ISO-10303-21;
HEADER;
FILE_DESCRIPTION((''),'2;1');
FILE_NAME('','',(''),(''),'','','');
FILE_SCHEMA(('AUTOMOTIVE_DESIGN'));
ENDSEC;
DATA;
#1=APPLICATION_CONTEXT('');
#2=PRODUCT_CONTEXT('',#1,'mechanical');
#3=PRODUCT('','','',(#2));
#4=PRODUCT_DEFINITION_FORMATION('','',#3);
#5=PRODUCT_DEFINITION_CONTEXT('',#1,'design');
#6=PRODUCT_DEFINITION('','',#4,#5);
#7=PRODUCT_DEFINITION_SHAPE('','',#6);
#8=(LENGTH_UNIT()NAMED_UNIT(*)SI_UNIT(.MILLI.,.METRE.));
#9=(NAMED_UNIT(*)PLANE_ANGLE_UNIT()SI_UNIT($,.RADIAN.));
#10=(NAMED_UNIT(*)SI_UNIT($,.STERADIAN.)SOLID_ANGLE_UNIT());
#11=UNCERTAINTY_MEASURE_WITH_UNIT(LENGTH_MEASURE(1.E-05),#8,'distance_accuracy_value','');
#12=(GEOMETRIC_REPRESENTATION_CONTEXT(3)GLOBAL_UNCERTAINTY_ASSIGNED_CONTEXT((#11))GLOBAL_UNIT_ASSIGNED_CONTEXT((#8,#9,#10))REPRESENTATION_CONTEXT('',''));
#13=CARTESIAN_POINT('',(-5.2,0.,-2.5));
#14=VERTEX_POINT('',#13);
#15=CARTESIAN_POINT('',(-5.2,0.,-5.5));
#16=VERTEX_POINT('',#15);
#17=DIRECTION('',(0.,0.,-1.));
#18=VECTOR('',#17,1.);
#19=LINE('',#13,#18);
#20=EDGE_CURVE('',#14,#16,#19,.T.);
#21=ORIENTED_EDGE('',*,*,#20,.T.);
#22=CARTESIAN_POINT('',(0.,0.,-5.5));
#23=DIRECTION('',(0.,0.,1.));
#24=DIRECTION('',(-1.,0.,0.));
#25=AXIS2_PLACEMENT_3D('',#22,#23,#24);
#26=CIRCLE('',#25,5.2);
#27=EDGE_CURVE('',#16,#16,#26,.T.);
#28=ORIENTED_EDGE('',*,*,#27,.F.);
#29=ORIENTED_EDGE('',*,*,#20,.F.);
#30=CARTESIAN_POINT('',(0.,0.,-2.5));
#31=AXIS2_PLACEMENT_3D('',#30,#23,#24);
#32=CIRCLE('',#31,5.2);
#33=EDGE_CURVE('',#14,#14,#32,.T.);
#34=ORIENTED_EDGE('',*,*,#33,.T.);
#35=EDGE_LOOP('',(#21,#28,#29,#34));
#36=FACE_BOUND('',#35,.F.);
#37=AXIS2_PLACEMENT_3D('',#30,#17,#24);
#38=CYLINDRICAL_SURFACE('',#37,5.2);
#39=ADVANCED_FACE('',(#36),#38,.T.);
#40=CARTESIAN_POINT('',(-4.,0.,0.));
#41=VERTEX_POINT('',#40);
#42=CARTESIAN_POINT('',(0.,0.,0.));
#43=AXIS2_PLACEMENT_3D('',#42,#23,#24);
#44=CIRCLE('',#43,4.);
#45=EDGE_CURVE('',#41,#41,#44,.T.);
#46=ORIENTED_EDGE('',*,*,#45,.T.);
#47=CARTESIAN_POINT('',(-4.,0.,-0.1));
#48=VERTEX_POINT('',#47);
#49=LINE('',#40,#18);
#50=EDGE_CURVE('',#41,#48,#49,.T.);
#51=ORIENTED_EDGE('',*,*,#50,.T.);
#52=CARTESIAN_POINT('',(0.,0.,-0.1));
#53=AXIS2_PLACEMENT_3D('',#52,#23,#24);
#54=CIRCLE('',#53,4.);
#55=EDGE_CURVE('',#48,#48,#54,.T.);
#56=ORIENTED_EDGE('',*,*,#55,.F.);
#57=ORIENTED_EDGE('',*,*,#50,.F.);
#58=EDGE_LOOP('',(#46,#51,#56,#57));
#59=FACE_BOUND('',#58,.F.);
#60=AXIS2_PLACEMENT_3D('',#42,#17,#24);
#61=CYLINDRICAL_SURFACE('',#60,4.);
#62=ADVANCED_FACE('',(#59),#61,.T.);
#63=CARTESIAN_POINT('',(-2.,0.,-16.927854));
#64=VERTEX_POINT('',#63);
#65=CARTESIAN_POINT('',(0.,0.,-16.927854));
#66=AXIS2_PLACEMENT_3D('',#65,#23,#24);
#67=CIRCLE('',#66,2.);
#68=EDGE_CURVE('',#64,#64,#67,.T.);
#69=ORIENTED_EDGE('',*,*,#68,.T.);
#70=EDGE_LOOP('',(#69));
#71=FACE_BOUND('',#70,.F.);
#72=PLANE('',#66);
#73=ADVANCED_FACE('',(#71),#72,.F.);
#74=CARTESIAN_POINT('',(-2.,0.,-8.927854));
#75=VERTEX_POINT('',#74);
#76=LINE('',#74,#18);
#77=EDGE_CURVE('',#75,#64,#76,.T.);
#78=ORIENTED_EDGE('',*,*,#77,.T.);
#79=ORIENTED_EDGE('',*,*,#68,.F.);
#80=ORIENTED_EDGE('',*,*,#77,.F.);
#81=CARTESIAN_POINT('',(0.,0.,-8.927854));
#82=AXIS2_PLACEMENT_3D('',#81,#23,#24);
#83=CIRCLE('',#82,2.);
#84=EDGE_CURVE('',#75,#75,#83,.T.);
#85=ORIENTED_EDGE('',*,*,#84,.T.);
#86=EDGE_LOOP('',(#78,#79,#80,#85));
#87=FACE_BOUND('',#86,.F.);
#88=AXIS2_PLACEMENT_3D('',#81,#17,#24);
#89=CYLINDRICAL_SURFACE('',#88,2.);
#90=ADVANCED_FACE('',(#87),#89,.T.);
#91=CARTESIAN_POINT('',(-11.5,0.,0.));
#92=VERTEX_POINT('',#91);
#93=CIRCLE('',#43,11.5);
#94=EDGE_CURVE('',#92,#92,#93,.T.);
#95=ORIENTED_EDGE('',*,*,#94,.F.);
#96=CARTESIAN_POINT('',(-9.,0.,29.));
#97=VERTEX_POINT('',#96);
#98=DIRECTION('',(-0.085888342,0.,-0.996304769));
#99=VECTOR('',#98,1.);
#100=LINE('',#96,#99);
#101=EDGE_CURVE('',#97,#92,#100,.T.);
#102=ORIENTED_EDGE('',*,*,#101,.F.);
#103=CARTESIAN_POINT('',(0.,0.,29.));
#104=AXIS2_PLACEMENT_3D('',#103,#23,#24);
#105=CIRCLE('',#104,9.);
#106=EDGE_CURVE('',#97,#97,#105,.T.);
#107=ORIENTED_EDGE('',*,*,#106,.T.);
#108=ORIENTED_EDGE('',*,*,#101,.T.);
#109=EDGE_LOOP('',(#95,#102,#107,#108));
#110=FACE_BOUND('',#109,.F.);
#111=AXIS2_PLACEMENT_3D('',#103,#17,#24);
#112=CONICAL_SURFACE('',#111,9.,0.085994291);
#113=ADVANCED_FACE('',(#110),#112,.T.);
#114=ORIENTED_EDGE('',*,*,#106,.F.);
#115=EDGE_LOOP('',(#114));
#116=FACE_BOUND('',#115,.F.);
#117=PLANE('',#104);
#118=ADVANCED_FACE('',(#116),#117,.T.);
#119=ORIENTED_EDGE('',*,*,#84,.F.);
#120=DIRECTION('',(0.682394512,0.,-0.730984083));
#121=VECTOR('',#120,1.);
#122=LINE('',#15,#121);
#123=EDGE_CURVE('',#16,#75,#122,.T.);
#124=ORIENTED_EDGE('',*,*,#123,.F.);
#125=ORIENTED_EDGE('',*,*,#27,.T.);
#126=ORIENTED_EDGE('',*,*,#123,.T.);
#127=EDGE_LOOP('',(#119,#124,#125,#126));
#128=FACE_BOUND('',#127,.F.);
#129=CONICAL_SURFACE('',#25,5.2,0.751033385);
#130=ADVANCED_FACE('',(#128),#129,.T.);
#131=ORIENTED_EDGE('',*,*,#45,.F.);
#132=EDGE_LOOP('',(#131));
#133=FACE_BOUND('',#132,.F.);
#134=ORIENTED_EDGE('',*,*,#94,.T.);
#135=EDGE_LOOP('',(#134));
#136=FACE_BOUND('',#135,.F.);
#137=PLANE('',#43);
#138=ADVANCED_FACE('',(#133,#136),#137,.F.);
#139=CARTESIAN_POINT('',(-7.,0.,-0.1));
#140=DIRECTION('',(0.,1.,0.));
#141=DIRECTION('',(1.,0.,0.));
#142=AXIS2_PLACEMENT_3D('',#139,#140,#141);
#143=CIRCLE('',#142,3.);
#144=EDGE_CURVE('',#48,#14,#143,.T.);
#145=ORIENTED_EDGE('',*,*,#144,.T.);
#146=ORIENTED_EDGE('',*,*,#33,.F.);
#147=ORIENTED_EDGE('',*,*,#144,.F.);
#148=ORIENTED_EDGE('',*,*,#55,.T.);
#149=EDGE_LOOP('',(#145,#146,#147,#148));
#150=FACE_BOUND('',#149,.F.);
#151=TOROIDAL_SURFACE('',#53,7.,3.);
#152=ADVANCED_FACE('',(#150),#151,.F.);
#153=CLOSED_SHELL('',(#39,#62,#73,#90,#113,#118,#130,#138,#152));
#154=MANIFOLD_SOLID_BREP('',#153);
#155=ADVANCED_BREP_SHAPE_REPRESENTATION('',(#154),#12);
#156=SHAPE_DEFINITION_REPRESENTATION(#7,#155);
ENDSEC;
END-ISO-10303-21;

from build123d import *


# Not quite as in the source:
# - a fillet or chamfer that OpenCascade refuses, or shapes differently, is made with other operations: its cross-section is extruded or revolved along the edge and cut away or added


with BuildPart() as f1:
    # F0 (on Front) → F1 (revolve)
    with BuildSketch(Plane.XZ):
        Polygon((0, -16.9278544536), (0, 0), (0, 29), (-9, 29), (-11.5, 0), (-4, 0), (-4, -2.5), (-5.2, -2.5), (-5.2, -5.5), (-2, -8.9278544536), (-2, -16.9278544536), align=None)
    revolve(axis=Axis((0, 0, 14.5), (0, 0, 1)))

    # F2: fillet of radius 3 on 1 edges, made by hand

    # F2_s1 → F2_t2 (revolve)
    with BuildSketch(Plane.XZ):
        with BuildLine():
            ThreePointArc((-4, -0.1), (-4.316718427, -1.4416407865), (-5.2, -2.5))
            Line((-5.2, -2.5), (-5.164, -2.548))
            ThreePointArc((-5.164, -2.548), (-4.6, -2.56), (-4, -2.56))
            Line((-4, -2.56), (-3.94, -2.5))
            Line((-3.94, -2.5), (-3.94, -0.1))
            Line((-3.94, -0.1), (-4, -0.1))
        make_face()
    revolve(axis=Axis((0, 0, -2.5), (0, 0, 1)))


solid = f1.part
